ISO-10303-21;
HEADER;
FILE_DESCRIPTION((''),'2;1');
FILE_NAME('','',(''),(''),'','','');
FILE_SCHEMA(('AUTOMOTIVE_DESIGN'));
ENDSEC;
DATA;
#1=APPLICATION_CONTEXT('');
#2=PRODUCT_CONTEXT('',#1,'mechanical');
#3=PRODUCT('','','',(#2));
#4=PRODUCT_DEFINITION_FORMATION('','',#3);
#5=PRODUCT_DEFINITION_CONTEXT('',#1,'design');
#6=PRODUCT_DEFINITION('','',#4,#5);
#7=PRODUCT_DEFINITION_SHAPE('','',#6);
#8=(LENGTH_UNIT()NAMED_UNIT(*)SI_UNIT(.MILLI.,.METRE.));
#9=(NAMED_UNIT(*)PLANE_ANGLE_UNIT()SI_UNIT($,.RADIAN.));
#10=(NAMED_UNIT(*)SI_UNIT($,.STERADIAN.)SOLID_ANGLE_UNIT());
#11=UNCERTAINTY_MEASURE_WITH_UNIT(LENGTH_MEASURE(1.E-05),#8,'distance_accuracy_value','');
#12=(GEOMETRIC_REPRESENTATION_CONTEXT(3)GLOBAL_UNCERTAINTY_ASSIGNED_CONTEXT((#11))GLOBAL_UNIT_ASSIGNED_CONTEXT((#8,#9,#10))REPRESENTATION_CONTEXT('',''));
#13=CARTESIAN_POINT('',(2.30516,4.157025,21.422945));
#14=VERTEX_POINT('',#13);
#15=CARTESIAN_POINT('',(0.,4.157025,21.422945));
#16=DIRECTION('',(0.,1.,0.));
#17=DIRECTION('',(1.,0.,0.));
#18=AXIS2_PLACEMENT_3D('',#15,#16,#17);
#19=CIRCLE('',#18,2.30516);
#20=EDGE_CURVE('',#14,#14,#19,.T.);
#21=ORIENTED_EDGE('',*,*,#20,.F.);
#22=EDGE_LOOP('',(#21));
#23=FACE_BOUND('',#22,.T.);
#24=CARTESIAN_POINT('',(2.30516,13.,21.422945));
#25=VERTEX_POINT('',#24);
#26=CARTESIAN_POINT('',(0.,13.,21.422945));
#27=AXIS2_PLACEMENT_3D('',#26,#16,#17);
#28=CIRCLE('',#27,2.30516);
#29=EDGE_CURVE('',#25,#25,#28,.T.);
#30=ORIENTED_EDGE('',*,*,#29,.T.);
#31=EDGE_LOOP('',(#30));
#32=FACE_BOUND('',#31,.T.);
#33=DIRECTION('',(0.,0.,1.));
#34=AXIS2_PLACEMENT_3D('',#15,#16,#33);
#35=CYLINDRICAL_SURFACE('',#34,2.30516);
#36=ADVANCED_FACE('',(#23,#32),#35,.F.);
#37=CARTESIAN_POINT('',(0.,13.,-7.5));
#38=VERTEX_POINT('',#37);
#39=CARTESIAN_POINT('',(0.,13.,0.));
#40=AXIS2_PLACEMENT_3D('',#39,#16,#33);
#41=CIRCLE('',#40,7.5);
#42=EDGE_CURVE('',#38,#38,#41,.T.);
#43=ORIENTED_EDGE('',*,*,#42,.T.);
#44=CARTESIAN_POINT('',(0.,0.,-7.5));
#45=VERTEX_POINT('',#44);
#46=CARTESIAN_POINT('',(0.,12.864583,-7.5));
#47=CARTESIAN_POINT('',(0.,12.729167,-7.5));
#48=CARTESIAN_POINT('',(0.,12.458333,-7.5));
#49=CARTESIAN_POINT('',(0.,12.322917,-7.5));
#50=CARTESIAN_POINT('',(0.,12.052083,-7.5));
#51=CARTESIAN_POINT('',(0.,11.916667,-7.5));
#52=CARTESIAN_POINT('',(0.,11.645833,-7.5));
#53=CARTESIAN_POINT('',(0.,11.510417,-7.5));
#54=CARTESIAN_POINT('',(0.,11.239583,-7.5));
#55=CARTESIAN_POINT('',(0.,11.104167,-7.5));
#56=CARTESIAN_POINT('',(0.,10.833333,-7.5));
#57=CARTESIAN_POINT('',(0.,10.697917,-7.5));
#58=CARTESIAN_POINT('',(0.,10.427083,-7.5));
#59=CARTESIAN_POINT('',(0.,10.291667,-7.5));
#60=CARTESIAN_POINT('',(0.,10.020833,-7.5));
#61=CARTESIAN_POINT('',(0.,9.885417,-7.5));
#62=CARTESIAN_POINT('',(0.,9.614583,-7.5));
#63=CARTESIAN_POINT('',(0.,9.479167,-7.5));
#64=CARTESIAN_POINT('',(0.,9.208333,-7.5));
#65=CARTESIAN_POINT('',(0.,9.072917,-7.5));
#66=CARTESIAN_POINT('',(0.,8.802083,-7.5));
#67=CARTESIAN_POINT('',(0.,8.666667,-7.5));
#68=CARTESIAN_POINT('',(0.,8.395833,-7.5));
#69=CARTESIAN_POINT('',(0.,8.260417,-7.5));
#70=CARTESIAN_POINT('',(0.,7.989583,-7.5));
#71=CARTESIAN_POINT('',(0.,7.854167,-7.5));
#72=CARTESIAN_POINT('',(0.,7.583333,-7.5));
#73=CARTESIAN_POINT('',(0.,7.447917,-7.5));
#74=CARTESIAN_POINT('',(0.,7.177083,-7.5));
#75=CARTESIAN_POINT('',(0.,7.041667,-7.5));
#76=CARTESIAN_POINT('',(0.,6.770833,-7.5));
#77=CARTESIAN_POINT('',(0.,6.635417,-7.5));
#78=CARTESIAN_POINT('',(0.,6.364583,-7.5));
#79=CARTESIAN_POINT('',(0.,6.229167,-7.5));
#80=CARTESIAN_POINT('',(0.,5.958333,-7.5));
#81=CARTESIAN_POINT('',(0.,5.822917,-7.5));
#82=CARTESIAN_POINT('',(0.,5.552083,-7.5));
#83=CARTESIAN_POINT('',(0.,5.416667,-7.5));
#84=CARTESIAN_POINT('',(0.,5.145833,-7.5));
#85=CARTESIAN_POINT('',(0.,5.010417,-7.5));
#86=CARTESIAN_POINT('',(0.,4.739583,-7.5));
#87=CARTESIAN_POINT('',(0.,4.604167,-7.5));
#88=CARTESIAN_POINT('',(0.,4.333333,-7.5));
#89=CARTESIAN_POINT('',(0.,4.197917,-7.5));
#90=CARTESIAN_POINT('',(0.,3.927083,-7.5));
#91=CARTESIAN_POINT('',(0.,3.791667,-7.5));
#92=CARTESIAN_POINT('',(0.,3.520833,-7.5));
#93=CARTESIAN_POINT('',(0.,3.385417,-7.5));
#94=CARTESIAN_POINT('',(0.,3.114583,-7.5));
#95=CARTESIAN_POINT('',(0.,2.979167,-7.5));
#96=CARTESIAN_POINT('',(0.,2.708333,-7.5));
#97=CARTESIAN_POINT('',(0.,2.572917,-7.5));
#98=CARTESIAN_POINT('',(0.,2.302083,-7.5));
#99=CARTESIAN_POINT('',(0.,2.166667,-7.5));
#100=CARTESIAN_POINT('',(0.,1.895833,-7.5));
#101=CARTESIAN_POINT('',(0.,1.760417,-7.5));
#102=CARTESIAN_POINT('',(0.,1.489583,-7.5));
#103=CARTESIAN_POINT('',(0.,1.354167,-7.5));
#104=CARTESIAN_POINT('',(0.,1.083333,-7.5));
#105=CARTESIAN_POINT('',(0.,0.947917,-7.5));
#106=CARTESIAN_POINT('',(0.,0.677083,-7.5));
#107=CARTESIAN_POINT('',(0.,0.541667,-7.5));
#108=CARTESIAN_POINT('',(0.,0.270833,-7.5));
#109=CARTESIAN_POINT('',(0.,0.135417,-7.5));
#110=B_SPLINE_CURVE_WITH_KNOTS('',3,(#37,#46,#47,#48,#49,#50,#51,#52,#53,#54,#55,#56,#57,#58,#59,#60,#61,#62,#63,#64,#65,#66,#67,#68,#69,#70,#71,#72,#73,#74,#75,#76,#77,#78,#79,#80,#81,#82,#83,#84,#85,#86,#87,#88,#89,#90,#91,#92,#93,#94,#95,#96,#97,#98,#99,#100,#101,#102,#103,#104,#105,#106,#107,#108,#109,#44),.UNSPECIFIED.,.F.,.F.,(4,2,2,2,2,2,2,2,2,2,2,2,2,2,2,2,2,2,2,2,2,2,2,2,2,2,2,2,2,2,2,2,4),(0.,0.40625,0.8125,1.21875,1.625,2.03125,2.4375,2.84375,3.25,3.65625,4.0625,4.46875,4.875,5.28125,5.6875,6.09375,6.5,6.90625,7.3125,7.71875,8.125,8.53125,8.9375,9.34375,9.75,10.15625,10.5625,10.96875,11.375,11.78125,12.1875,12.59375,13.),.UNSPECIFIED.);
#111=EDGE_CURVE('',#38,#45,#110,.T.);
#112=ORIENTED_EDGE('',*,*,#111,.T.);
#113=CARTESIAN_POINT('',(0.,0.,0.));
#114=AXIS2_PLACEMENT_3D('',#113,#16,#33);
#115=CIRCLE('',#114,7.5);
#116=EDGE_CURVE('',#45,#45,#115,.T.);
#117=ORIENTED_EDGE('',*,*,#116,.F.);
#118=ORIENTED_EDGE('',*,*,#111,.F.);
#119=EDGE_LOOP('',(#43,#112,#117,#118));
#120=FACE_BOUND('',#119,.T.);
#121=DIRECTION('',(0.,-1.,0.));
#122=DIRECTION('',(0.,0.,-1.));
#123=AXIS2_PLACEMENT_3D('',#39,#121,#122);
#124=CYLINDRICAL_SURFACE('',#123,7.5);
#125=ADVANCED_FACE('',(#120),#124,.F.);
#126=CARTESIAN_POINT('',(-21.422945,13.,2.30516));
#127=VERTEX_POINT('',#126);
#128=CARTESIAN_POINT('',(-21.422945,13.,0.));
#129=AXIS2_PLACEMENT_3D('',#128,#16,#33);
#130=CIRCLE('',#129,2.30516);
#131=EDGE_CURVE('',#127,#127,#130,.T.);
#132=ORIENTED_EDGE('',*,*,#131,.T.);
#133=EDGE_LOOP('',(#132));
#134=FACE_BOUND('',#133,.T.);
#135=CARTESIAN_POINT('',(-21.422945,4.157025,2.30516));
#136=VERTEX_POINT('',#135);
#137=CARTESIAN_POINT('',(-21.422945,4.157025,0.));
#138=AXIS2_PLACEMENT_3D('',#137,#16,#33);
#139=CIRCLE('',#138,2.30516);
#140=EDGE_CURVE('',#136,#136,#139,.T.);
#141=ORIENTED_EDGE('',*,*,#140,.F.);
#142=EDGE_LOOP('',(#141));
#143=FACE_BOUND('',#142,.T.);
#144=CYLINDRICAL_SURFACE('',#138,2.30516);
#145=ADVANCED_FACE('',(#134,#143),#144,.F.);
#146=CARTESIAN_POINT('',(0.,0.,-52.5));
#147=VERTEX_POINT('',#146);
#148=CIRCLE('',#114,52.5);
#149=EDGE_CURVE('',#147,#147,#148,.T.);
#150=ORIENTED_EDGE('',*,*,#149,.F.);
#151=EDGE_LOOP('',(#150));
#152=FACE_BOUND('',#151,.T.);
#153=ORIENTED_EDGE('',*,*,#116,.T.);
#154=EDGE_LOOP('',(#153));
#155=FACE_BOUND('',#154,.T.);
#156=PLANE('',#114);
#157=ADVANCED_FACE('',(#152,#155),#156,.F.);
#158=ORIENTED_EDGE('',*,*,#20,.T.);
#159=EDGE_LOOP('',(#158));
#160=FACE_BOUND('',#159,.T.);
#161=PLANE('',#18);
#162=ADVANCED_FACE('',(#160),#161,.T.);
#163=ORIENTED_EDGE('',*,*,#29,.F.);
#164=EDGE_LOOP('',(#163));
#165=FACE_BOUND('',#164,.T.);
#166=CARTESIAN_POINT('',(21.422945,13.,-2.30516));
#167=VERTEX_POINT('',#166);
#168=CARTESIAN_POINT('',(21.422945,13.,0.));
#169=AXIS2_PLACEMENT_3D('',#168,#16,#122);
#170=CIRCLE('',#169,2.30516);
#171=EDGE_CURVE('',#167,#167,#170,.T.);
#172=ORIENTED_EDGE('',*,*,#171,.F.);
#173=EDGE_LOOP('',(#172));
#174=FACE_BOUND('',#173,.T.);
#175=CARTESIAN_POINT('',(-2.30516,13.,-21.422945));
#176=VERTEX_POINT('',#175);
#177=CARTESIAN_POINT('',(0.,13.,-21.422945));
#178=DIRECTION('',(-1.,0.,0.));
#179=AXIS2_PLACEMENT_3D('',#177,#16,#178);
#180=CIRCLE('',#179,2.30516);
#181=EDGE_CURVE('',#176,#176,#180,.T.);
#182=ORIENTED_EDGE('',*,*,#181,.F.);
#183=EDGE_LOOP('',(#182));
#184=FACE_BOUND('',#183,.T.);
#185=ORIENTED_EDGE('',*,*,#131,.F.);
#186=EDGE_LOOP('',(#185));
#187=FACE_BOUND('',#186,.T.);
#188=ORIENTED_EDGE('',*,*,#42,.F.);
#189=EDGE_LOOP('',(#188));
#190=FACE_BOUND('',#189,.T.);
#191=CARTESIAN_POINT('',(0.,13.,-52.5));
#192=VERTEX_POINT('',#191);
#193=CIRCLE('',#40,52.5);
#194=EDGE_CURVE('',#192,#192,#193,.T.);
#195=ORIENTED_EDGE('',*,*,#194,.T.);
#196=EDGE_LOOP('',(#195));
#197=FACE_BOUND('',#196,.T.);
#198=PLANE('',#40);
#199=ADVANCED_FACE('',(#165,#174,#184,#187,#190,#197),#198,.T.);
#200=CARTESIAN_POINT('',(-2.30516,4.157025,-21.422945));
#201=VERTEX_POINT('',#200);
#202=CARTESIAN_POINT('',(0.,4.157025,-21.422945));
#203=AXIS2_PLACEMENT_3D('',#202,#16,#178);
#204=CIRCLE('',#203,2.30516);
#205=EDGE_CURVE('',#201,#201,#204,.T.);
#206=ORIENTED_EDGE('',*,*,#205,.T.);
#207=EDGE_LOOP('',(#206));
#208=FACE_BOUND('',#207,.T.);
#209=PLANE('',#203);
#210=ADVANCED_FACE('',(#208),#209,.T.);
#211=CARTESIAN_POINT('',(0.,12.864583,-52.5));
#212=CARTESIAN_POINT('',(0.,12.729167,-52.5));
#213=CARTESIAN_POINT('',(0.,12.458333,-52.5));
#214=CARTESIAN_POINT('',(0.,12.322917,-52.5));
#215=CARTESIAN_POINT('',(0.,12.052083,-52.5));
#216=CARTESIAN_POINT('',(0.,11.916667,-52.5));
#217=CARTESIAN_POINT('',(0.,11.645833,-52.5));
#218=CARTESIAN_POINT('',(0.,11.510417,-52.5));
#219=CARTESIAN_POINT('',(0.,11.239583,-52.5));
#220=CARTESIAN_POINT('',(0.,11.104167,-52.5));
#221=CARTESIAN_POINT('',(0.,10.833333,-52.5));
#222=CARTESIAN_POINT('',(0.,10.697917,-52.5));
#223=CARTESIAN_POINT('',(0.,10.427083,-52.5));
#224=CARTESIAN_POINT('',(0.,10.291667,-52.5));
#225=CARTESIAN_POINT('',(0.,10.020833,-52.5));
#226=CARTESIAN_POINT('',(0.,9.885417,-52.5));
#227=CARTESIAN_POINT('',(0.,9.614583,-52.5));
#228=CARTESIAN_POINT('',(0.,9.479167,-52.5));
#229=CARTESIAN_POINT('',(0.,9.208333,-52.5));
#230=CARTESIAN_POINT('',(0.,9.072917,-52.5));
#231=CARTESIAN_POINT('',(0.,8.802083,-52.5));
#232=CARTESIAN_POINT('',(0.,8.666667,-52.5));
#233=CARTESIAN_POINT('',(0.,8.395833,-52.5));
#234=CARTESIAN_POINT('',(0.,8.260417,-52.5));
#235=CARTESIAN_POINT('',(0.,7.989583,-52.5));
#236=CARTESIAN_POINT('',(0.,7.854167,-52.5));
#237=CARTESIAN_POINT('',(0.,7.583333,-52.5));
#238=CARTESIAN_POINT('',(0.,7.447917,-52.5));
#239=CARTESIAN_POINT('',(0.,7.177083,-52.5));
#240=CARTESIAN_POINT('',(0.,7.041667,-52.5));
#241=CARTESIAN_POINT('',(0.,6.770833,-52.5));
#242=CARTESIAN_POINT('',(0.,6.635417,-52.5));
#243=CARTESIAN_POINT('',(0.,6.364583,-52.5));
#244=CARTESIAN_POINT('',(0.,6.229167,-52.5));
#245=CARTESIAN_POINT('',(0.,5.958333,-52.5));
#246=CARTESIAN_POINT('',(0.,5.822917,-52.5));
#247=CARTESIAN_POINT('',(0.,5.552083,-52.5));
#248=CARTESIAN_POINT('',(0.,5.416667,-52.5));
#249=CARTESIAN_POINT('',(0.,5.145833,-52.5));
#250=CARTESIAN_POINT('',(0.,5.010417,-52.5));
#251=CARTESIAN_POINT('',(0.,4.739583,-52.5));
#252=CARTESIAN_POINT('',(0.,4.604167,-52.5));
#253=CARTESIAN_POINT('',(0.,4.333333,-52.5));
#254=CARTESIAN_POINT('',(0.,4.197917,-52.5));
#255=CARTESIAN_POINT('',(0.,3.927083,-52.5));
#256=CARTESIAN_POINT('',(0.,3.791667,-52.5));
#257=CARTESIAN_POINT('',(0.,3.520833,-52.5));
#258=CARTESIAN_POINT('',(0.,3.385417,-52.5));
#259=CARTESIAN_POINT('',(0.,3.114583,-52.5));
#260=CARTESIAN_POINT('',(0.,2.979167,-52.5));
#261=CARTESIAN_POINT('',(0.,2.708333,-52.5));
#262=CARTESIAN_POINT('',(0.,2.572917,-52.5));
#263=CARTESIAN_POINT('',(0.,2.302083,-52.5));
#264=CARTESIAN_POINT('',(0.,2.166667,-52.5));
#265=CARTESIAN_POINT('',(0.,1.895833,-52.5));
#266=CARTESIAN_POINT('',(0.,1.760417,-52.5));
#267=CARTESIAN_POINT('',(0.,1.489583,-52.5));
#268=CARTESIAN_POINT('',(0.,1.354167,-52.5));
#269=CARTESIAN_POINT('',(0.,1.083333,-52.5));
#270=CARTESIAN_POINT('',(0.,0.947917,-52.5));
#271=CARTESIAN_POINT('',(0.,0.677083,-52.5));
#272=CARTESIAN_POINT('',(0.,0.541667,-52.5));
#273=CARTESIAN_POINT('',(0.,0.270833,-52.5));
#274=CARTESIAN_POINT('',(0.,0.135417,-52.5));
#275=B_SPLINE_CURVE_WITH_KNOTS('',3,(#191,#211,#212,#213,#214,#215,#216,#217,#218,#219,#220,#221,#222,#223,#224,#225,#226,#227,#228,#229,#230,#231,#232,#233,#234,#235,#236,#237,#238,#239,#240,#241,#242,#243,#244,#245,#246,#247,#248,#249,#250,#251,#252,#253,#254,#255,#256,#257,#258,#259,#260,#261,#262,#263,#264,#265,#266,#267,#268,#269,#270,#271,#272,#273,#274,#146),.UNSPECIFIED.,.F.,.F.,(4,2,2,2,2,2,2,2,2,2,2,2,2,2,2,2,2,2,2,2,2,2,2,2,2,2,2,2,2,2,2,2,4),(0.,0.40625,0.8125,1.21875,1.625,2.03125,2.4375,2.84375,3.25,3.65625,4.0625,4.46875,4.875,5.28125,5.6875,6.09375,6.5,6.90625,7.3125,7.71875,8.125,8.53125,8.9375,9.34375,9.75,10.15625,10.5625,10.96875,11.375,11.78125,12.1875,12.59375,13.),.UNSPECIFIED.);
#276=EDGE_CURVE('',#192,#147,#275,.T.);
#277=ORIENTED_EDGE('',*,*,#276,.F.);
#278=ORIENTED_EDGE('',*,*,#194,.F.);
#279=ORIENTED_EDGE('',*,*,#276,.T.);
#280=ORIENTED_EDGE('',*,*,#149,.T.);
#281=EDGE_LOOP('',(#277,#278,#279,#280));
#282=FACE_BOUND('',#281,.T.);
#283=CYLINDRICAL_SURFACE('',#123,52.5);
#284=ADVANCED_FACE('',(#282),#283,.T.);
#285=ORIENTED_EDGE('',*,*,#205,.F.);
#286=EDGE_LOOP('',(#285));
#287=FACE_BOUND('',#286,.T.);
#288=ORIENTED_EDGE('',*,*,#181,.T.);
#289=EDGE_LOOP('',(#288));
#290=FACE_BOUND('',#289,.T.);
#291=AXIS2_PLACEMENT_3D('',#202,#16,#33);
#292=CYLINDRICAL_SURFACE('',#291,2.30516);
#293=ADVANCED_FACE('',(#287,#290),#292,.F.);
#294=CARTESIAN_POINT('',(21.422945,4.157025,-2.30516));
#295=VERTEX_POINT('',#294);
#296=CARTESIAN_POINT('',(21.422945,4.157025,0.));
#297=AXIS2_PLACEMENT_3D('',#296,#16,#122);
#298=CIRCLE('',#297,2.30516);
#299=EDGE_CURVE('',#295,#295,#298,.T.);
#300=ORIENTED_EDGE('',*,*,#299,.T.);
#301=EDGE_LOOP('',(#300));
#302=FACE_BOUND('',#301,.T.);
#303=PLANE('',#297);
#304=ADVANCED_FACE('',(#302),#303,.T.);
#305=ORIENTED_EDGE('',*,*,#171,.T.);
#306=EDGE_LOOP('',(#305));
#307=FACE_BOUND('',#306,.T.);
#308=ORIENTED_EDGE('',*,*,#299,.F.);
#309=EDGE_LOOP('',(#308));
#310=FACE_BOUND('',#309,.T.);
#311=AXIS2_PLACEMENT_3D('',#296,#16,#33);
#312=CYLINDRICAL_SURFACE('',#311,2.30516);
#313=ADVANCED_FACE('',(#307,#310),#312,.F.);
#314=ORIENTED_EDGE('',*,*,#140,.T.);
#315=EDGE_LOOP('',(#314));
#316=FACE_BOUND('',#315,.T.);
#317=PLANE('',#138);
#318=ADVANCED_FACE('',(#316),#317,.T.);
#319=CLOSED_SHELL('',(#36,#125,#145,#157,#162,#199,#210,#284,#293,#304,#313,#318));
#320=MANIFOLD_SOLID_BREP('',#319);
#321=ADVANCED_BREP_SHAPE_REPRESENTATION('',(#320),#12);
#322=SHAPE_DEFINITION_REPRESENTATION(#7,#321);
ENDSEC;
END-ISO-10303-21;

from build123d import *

# Parameters (mm, degrees)
SKETCH1_R           = 52.5
BOSS_EXTRUDE1_DEPTH = 13
SKETCH2_R           = 7.5
CUT_EXTRUDE1_DEPTH  = 76.375725535
SKETCH3_R           = 2.305159733
CUT_EXTRUDE2_DEPTH  = 8.842975373
CIRPATTERN1_COUNT   = 4


with BuildPart() as part:
    # Sketch1 → Boss-Extrude1 (new body)
    with BuildSketch(Plane(origin=(0, 0, 0), x_dir=(1, 0, 0), z_dir=(0, 1, 0))):
        Circle(SKETCH1_R)
    extrude(amount=BOSS_EXTRUDE1_DEPTH)

    # Sketch2 → Cut-Extrude1 (cut, through all)
    with BuildSketch(Plane(origin=(0, 0, 0), x_dir=(1, 0, 0), z_dir=(0, 1, 0))):
        Circle(SKETCH2_R)
    extrude(amount=CUT_EXTRUDE1_DEPTH, mode=Mode.SUBTRACT)

    # Sketch3 → Cut-Extrude2 (cut)
    with BuildSketch(Plane(origin=(0, 13, 0), x_dir=(1, 0, 0), z_dir=(0, 1, 0))):
        with Locations((-21.422945149, 0)):
            Circle(SKETCH3_R)
    cut_extrude2 = extrude(amount=-CUT_EXTRUDE2_DEPTH, mode=Mode.SUBTRACT)

    # CirPattern1: Cut-Extrude2 ×4 about axis
    cirpattern1_axis = Axis((0, 0, 0), (0, 1, 0))
    for i in range(1, CIRPATTERN1_COUNT):
        add(cut_extrude2.rotate(cirpattern1_axis, i * 360 / CIRPATTERN1_COUNT), mode=Mode.SUBTRACT)


solid = part.part
